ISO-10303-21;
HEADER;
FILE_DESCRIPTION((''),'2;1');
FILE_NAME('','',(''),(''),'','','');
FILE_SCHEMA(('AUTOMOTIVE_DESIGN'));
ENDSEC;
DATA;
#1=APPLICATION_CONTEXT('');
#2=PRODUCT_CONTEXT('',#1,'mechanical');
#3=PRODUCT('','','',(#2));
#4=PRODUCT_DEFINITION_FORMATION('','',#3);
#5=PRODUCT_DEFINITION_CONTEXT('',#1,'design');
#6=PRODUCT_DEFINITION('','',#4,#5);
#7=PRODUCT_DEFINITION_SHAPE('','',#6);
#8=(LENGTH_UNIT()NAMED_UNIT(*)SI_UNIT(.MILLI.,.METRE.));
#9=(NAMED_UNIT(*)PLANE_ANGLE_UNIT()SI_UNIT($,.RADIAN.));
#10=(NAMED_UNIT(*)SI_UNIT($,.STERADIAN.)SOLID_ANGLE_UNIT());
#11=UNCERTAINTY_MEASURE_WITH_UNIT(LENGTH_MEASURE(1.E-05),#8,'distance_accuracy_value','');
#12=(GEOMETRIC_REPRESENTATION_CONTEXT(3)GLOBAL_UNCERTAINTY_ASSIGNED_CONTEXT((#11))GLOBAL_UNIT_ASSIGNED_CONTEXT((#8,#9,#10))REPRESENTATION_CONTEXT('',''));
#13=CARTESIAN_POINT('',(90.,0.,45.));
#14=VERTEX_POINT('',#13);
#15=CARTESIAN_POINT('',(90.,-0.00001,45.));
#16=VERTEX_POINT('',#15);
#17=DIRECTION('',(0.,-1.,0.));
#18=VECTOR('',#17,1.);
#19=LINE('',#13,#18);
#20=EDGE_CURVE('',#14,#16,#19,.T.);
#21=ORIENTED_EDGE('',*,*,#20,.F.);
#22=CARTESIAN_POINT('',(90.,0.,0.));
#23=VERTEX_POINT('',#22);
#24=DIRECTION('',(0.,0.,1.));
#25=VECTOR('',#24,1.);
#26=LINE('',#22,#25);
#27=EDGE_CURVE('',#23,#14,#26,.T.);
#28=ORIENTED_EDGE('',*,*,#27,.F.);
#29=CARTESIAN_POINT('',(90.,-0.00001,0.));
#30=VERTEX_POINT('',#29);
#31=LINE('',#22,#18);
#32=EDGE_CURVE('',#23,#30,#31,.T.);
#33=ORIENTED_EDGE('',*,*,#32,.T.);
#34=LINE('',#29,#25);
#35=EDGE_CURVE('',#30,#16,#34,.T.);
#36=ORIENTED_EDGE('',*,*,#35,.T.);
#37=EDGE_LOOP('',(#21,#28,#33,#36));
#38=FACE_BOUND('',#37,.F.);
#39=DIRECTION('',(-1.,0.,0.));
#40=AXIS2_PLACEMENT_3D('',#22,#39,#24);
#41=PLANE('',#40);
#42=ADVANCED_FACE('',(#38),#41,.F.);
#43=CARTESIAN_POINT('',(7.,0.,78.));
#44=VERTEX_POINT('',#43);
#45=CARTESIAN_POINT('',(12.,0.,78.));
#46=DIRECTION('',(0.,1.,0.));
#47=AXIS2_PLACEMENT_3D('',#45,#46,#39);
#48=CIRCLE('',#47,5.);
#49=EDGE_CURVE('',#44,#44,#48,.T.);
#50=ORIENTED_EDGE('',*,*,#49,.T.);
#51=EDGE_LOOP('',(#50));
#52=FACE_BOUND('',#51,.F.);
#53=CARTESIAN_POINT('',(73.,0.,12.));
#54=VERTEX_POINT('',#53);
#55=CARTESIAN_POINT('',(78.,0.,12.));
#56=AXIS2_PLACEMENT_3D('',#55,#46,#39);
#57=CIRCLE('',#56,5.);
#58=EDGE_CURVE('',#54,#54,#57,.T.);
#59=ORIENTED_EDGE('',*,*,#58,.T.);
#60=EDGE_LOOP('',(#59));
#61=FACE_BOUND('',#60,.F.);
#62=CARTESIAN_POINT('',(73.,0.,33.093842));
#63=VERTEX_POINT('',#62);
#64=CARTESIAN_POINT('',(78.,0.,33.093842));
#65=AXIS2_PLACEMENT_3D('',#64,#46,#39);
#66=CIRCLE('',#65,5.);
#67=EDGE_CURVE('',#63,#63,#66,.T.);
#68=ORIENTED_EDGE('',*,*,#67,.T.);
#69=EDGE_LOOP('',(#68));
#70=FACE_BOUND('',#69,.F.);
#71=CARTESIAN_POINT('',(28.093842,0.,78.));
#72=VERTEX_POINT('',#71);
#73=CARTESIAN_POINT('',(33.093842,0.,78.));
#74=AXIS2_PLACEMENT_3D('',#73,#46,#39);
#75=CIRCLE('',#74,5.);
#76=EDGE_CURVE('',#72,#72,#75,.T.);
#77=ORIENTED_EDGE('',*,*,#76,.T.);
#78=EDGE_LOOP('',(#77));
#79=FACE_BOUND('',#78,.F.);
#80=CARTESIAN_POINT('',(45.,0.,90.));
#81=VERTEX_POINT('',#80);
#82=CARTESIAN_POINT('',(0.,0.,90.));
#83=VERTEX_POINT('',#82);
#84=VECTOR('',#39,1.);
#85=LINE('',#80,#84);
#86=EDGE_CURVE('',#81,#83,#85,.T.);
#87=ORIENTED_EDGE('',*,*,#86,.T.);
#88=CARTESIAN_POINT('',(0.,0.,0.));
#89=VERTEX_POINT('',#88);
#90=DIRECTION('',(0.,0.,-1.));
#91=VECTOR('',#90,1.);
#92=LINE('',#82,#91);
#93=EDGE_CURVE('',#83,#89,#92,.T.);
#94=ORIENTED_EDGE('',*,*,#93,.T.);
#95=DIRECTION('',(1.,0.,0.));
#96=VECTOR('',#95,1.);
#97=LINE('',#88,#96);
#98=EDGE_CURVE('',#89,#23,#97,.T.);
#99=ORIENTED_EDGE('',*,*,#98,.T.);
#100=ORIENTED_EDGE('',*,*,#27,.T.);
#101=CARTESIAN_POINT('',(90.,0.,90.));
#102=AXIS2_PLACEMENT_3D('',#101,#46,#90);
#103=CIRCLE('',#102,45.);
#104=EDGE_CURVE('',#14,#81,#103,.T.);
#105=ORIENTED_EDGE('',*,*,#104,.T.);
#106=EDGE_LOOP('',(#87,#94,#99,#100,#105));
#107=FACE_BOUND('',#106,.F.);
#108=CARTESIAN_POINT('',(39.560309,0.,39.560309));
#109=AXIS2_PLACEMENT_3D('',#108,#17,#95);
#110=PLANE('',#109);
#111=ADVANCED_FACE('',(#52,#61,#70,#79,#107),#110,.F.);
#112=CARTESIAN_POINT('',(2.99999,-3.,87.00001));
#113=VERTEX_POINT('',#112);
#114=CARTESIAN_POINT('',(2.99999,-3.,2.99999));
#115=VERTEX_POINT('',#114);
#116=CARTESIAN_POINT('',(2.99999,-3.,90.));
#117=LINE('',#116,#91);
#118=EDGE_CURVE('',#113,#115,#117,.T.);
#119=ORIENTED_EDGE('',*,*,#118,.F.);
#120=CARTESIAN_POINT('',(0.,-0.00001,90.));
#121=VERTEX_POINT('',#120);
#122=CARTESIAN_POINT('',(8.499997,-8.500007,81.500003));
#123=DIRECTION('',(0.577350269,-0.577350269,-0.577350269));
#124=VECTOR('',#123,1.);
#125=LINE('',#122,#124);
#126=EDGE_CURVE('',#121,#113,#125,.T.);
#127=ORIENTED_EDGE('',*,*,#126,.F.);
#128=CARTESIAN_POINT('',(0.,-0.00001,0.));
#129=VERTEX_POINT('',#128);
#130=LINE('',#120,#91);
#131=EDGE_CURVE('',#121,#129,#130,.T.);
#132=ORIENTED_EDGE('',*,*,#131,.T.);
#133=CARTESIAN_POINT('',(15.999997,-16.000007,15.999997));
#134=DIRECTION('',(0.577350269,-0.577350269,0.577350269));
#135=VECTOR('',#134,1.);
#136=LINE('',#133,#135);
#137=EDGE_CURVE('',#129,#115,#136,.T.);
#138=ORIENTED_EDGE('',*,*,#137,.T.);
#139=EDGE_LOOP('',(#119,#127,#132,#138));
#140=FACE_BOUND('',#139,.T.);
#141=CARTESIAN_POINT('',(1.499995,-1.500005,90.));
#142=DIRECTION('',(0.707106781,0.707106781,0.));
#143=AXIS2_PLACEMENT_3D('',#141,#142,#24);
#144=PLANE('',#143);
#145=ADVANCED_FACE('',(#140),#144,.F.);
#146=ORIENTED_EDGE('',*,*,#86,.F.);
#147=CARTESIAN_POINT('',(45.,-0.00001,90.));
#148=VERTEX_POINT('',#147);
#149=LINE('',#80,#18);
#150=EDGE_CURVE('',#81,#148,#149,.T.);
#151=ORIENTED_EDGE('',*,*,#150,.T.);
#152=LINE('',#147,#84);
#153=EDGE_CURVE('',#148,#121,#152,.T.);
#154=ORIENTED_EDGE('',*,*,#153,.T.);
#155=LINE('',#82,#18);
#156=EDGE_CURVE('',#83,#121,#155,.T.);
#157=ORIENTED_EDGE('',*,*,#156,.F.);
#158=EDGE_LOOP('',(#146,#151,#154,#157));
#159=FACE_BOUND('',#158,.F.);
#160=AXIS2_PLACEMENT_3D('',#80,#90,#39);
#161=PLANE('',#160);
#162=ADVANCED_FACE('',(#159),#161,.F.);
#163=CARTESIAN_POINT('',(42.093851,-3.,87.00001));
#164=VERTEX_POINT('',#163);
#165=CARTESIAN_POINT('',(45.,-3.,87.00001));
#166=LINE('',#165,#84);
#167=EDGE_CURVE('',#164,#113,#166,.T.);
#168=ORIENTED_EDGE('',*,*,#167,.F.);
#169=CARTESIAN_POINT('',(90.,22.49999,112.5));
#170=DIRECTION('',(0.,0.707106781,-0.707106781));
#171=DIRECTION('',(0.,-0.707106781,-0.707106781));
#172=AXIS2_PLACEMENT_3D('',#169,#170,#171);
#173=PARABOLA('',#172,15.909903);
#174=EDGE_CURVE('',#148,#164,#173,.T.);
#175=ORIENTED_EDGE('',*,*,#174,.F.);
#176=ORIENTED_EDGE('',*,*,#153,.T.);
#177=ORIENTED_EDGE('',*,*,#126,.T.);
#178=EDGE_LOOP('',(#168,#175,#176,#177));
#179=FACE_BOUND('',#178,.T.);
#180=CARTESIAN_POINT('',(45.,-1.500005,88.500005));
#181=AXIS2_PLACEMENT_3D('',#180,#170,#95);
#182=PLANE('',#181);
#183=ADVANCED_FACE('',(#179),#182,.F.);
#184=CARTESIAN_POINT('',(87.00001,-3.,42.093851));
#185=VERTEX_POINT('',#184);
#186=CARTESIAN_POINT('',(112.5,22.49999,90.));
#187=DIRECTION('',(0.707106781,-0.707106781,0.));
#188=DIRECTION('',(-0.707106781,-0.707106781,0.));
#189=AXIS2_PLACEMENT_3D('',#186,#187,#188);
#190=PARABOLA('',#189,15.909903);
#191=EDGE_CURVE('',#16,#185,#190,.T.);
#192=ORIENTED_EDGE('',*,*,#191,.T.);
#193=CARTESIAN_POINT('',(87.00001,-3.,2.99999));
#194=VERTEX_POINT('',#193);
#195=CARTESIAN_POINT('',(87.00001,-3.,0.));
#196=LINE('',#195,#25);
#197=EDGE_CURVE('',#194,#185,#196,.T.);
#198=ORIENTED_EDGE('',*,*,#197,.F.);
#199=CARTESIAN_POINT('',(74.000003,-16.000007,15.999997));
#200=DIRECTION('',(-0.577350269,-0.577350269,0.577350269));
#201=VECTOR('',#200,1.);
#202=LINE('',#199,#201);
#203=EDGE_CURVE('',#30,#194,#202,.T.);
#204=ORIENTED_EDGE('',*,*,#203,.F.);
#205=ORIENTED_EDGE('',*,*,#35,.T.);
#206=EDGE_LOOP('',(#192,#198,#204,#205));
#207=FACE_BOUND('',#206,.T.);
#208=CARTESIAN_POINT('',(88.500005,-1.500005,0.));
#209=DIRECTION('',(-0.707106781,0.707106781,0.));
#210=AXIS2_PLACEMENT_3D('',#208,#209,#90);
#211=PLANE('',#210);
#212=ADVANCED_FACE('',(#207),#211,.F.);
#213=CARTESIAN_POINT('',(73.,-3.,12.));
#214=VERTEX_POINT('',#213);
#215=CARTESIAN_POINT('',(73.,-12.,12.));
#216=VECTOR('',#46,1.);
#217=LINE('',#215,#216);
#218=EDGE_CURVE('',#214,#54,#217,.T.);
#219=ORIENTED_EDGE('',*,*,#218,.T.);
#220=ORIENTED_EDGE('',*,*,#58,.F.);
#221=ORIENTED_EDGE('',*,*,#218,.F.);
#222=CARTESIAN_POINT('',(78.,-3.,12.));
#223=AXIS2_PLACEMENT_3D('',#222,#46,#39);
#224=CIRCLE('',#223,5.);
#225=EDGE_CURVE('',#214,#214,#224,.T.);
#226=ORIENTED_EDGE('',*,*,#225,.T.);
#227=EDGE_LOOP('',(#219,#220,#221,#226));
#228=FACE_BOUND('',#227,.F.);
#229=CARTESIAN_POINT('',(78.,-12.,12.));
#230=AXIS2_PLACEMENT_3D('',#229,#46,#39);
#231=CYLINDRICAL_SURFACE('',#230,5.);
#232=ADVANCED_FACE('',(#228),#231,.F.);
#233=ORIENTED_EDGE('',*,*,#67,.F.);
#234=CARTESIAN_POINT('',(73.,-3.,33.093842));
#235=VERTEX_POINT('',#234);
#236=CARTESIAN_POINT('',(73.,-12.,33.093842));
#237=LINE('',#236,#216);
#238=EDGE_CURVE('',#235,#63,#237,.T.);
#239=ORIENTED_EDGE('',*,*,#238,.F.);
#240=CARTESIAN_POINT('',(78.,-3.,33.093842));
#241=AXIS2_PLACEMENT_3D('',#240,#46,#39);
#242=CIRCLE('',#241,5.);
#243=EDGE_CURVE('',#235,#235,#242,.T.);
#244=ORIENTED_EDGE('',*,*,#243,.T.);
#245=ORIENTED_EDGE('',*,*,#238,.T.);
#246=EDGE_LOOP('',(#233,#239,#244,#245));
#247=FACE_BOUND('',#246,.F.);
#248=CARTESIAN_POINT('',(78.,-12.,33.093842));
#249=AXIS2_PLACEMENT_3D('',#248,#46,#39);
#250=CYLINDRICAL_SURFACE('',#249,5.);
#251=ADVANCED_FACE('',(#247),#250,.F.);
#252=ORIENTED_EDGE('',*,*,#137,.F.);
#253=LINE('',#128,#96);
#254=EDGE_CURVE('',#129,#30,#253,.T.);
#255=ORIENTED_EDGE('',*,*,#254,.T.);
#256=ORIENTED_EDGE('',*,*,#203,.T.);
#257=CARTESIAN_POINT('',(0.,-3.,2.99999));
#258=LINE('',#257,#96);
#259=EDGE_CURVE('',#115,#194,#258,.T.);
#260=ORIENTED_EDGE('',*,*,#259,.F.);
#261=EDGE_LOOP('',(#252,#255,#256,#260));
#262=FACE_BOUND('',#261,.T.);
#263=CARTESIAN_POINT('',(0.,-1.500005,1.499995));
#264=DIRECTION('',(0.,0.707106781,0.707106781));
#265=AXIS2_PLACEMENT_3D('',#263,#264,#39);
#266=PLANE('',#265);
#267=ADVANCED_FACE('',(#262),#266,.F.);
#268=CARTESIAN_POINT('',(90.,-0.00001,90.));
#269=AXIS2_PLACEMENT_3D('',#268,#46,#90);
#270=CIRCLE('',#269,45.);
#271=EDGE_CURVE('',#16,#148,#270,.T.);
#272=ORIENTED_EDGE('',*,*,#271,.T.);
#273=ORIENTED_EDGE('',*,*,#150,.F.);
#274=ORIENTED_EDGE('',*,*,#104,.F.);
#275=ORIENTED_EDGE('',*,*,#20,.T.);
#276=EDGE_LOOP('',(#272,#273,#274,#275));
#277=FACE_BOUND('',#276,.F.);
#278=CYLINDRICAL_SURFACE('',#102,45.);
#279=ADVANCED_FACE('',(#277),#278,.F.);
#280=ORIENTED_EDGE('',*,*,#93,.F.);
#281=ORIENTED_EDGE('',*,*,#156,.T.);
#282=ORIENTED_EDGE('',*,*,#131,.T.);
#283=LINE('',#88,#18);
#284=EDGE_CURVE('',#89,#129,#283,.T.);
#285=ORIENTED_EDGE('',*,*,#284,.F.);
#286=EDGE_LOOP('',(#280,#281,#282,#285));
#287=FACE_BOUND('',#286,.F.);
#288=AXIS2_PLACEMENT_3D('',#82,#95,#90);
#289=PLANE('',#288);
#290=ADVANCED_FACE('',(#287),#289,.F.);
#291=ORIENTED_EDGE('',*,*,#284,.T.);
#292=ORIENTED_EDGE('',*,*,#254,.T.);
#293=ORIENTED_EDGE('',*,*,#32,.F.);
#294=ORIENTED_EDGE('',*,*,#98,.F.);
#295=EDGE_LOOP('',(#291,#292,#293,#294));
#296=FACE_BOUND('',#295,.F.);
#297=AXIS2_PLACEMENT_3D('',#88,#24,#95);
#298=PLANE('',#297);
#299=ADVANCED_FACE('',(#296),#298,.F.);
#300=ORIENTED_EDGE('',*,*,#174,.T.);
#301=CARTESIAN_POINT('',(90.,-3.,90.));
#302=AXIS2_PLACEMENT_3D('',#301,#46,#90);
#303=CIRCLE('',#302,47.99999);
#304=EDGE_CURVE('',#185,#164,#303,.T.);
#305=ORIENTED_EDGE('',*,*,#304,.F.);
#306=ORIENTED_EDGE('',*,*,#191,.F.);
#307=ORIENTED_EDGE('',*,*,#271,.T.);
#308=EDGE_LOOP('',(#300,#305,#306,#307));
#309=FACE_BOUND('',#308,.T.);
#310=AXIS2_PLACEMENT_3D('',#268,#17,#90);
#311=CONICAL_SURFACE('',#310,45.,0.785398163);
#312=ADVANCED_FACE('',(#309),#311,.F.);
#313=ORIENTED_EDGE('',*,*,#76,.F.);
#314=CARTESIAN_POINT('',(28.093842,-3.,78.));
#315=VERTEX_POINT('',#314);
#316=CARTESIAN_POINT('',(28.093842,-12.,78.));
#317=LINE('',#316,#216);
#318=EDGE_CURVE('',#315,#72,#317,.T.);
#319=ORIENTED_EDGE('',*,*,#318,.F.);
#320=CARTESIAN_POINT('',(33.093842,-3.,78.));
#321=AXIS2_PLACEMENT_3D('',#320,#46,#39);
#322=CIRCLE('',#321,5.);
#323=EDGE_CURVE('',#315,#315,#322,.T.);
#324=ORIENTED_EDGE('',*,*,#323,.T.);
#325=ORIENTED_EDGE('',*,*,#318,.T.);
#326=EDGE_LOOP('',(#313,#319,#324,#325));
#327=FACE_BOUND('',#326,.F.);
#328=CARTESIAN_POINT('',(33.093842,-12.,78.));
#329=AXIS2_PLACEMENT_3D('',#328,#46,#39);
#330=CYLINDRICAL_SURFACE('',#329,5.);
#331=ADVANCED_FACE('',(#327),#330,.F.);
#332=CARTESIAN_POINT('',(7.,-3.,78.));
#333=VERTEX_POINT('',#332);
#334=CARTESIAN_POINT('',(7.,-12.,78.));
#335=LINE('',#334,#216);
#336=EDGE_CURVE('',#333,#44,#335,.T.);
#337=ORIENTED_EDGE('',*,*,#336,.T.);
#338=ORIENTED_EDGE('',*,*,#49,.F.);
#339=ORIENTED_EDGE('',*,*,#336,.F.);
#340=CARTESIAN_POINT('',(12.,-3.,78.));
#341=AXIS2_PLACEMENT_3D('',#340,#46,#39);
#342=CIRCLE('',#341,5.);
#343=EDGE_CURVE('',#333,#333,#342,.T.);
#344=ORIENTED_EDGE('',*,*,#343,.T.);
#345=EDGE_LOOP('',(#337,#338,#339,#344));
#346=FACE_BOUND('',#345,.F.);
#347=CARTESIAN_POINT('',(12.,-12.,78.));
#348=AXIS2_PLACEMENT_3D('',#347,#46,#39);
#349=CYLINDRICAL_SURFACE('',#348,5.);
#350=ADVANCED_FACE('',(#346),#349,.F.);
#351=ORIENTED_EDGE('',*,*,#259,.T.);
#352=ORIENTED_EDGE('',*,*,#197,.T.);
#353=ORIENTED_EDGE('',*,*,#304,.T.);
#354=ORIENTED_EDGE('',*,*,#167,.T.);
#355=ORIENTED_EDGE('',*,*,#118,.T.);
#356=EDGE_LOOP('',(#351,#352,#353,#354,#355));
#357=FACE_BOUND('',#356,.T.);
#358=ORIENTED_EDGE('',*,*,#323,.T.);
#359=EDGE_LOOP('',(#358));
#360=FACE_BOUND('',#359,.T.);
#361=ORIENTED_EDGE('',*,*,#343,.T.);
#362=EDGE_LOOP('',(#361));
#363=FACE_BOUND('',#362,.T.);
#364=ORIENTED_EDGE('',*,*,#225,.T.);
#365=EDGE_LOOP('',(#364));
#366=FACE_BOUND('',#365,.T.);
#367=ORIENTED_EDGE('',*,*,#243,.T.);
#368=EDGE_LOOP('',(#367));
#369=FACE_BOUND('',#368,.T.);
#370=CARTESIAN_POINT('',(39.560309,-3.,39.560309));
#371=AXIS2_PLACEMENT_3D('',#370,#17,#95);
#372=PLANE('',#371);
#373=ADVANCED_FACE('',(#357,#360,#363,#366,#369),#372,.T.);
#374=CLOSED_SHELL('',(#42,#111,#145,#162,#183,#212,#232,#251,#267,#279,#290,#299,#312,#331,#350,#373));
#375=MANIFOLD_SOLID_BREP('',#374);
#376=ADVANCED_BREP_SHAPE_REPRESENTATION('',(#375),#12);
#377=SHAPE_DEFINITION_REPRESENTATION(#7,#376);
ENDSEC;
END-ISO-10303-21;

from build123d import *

# Parameters (mm, degrees)
F1_DEPTH = 3
F2_SIZE  = 2.99999
F4_D     = 10
F4_DEPTH = 9
F4_TIP   = 3.0043030951


# Not quite as in the source:
# - a fillet or chamfer is up to 0.001 mm smaller than in the source, because OpenCascade refuses the exact size


with BuildPart() as f1:
    # F0 (on Front) → F1 (new body)
    with BuildSketch(Plane.XZ):
        with BuildLine():
            Line((0, 90), (0, 0))
            Line((0, 0), (90, 0))
            Line((90, 0), (90, 45))
            ThreePointArc((90, 45), (58.1801948466, 58.1801948466), (45, 90))
            Line((45, 90), (0, 90))
        make_face()
    extrude(amount=F1_DEPTH)

    # F2 (size 3 in the source; OpenCascade refuses exactly that, so slightly less here)
    f2_edges = [f1.edges().sort_by_distance(p)[0] for p in [
        (22.5, -3, 90),
        (0, -3, 45),
        (45, -3, 0),
        (90, -3, 22.5),
        (58.180195, -3, 58.180195),
    ]]
    chamfer(f2_edges, length=F2_SIZE)

    # F4
    with Locations(Plane.XZ.offset(3)):
        with Locations((12, 78), (33.093841732, 78), (78, 33.093841732), (78, 12)):
            Hole(F4_D / 2, depth=F4_DEPTH)
            with Locations((0, 0, -(F4_DEPTH + F4_TIP / 2))):  # 118° drill point
                Cone(0, F4_D / 2, F4_TIP, mode=Mode.SUBTRACT)


solid = f1.part
